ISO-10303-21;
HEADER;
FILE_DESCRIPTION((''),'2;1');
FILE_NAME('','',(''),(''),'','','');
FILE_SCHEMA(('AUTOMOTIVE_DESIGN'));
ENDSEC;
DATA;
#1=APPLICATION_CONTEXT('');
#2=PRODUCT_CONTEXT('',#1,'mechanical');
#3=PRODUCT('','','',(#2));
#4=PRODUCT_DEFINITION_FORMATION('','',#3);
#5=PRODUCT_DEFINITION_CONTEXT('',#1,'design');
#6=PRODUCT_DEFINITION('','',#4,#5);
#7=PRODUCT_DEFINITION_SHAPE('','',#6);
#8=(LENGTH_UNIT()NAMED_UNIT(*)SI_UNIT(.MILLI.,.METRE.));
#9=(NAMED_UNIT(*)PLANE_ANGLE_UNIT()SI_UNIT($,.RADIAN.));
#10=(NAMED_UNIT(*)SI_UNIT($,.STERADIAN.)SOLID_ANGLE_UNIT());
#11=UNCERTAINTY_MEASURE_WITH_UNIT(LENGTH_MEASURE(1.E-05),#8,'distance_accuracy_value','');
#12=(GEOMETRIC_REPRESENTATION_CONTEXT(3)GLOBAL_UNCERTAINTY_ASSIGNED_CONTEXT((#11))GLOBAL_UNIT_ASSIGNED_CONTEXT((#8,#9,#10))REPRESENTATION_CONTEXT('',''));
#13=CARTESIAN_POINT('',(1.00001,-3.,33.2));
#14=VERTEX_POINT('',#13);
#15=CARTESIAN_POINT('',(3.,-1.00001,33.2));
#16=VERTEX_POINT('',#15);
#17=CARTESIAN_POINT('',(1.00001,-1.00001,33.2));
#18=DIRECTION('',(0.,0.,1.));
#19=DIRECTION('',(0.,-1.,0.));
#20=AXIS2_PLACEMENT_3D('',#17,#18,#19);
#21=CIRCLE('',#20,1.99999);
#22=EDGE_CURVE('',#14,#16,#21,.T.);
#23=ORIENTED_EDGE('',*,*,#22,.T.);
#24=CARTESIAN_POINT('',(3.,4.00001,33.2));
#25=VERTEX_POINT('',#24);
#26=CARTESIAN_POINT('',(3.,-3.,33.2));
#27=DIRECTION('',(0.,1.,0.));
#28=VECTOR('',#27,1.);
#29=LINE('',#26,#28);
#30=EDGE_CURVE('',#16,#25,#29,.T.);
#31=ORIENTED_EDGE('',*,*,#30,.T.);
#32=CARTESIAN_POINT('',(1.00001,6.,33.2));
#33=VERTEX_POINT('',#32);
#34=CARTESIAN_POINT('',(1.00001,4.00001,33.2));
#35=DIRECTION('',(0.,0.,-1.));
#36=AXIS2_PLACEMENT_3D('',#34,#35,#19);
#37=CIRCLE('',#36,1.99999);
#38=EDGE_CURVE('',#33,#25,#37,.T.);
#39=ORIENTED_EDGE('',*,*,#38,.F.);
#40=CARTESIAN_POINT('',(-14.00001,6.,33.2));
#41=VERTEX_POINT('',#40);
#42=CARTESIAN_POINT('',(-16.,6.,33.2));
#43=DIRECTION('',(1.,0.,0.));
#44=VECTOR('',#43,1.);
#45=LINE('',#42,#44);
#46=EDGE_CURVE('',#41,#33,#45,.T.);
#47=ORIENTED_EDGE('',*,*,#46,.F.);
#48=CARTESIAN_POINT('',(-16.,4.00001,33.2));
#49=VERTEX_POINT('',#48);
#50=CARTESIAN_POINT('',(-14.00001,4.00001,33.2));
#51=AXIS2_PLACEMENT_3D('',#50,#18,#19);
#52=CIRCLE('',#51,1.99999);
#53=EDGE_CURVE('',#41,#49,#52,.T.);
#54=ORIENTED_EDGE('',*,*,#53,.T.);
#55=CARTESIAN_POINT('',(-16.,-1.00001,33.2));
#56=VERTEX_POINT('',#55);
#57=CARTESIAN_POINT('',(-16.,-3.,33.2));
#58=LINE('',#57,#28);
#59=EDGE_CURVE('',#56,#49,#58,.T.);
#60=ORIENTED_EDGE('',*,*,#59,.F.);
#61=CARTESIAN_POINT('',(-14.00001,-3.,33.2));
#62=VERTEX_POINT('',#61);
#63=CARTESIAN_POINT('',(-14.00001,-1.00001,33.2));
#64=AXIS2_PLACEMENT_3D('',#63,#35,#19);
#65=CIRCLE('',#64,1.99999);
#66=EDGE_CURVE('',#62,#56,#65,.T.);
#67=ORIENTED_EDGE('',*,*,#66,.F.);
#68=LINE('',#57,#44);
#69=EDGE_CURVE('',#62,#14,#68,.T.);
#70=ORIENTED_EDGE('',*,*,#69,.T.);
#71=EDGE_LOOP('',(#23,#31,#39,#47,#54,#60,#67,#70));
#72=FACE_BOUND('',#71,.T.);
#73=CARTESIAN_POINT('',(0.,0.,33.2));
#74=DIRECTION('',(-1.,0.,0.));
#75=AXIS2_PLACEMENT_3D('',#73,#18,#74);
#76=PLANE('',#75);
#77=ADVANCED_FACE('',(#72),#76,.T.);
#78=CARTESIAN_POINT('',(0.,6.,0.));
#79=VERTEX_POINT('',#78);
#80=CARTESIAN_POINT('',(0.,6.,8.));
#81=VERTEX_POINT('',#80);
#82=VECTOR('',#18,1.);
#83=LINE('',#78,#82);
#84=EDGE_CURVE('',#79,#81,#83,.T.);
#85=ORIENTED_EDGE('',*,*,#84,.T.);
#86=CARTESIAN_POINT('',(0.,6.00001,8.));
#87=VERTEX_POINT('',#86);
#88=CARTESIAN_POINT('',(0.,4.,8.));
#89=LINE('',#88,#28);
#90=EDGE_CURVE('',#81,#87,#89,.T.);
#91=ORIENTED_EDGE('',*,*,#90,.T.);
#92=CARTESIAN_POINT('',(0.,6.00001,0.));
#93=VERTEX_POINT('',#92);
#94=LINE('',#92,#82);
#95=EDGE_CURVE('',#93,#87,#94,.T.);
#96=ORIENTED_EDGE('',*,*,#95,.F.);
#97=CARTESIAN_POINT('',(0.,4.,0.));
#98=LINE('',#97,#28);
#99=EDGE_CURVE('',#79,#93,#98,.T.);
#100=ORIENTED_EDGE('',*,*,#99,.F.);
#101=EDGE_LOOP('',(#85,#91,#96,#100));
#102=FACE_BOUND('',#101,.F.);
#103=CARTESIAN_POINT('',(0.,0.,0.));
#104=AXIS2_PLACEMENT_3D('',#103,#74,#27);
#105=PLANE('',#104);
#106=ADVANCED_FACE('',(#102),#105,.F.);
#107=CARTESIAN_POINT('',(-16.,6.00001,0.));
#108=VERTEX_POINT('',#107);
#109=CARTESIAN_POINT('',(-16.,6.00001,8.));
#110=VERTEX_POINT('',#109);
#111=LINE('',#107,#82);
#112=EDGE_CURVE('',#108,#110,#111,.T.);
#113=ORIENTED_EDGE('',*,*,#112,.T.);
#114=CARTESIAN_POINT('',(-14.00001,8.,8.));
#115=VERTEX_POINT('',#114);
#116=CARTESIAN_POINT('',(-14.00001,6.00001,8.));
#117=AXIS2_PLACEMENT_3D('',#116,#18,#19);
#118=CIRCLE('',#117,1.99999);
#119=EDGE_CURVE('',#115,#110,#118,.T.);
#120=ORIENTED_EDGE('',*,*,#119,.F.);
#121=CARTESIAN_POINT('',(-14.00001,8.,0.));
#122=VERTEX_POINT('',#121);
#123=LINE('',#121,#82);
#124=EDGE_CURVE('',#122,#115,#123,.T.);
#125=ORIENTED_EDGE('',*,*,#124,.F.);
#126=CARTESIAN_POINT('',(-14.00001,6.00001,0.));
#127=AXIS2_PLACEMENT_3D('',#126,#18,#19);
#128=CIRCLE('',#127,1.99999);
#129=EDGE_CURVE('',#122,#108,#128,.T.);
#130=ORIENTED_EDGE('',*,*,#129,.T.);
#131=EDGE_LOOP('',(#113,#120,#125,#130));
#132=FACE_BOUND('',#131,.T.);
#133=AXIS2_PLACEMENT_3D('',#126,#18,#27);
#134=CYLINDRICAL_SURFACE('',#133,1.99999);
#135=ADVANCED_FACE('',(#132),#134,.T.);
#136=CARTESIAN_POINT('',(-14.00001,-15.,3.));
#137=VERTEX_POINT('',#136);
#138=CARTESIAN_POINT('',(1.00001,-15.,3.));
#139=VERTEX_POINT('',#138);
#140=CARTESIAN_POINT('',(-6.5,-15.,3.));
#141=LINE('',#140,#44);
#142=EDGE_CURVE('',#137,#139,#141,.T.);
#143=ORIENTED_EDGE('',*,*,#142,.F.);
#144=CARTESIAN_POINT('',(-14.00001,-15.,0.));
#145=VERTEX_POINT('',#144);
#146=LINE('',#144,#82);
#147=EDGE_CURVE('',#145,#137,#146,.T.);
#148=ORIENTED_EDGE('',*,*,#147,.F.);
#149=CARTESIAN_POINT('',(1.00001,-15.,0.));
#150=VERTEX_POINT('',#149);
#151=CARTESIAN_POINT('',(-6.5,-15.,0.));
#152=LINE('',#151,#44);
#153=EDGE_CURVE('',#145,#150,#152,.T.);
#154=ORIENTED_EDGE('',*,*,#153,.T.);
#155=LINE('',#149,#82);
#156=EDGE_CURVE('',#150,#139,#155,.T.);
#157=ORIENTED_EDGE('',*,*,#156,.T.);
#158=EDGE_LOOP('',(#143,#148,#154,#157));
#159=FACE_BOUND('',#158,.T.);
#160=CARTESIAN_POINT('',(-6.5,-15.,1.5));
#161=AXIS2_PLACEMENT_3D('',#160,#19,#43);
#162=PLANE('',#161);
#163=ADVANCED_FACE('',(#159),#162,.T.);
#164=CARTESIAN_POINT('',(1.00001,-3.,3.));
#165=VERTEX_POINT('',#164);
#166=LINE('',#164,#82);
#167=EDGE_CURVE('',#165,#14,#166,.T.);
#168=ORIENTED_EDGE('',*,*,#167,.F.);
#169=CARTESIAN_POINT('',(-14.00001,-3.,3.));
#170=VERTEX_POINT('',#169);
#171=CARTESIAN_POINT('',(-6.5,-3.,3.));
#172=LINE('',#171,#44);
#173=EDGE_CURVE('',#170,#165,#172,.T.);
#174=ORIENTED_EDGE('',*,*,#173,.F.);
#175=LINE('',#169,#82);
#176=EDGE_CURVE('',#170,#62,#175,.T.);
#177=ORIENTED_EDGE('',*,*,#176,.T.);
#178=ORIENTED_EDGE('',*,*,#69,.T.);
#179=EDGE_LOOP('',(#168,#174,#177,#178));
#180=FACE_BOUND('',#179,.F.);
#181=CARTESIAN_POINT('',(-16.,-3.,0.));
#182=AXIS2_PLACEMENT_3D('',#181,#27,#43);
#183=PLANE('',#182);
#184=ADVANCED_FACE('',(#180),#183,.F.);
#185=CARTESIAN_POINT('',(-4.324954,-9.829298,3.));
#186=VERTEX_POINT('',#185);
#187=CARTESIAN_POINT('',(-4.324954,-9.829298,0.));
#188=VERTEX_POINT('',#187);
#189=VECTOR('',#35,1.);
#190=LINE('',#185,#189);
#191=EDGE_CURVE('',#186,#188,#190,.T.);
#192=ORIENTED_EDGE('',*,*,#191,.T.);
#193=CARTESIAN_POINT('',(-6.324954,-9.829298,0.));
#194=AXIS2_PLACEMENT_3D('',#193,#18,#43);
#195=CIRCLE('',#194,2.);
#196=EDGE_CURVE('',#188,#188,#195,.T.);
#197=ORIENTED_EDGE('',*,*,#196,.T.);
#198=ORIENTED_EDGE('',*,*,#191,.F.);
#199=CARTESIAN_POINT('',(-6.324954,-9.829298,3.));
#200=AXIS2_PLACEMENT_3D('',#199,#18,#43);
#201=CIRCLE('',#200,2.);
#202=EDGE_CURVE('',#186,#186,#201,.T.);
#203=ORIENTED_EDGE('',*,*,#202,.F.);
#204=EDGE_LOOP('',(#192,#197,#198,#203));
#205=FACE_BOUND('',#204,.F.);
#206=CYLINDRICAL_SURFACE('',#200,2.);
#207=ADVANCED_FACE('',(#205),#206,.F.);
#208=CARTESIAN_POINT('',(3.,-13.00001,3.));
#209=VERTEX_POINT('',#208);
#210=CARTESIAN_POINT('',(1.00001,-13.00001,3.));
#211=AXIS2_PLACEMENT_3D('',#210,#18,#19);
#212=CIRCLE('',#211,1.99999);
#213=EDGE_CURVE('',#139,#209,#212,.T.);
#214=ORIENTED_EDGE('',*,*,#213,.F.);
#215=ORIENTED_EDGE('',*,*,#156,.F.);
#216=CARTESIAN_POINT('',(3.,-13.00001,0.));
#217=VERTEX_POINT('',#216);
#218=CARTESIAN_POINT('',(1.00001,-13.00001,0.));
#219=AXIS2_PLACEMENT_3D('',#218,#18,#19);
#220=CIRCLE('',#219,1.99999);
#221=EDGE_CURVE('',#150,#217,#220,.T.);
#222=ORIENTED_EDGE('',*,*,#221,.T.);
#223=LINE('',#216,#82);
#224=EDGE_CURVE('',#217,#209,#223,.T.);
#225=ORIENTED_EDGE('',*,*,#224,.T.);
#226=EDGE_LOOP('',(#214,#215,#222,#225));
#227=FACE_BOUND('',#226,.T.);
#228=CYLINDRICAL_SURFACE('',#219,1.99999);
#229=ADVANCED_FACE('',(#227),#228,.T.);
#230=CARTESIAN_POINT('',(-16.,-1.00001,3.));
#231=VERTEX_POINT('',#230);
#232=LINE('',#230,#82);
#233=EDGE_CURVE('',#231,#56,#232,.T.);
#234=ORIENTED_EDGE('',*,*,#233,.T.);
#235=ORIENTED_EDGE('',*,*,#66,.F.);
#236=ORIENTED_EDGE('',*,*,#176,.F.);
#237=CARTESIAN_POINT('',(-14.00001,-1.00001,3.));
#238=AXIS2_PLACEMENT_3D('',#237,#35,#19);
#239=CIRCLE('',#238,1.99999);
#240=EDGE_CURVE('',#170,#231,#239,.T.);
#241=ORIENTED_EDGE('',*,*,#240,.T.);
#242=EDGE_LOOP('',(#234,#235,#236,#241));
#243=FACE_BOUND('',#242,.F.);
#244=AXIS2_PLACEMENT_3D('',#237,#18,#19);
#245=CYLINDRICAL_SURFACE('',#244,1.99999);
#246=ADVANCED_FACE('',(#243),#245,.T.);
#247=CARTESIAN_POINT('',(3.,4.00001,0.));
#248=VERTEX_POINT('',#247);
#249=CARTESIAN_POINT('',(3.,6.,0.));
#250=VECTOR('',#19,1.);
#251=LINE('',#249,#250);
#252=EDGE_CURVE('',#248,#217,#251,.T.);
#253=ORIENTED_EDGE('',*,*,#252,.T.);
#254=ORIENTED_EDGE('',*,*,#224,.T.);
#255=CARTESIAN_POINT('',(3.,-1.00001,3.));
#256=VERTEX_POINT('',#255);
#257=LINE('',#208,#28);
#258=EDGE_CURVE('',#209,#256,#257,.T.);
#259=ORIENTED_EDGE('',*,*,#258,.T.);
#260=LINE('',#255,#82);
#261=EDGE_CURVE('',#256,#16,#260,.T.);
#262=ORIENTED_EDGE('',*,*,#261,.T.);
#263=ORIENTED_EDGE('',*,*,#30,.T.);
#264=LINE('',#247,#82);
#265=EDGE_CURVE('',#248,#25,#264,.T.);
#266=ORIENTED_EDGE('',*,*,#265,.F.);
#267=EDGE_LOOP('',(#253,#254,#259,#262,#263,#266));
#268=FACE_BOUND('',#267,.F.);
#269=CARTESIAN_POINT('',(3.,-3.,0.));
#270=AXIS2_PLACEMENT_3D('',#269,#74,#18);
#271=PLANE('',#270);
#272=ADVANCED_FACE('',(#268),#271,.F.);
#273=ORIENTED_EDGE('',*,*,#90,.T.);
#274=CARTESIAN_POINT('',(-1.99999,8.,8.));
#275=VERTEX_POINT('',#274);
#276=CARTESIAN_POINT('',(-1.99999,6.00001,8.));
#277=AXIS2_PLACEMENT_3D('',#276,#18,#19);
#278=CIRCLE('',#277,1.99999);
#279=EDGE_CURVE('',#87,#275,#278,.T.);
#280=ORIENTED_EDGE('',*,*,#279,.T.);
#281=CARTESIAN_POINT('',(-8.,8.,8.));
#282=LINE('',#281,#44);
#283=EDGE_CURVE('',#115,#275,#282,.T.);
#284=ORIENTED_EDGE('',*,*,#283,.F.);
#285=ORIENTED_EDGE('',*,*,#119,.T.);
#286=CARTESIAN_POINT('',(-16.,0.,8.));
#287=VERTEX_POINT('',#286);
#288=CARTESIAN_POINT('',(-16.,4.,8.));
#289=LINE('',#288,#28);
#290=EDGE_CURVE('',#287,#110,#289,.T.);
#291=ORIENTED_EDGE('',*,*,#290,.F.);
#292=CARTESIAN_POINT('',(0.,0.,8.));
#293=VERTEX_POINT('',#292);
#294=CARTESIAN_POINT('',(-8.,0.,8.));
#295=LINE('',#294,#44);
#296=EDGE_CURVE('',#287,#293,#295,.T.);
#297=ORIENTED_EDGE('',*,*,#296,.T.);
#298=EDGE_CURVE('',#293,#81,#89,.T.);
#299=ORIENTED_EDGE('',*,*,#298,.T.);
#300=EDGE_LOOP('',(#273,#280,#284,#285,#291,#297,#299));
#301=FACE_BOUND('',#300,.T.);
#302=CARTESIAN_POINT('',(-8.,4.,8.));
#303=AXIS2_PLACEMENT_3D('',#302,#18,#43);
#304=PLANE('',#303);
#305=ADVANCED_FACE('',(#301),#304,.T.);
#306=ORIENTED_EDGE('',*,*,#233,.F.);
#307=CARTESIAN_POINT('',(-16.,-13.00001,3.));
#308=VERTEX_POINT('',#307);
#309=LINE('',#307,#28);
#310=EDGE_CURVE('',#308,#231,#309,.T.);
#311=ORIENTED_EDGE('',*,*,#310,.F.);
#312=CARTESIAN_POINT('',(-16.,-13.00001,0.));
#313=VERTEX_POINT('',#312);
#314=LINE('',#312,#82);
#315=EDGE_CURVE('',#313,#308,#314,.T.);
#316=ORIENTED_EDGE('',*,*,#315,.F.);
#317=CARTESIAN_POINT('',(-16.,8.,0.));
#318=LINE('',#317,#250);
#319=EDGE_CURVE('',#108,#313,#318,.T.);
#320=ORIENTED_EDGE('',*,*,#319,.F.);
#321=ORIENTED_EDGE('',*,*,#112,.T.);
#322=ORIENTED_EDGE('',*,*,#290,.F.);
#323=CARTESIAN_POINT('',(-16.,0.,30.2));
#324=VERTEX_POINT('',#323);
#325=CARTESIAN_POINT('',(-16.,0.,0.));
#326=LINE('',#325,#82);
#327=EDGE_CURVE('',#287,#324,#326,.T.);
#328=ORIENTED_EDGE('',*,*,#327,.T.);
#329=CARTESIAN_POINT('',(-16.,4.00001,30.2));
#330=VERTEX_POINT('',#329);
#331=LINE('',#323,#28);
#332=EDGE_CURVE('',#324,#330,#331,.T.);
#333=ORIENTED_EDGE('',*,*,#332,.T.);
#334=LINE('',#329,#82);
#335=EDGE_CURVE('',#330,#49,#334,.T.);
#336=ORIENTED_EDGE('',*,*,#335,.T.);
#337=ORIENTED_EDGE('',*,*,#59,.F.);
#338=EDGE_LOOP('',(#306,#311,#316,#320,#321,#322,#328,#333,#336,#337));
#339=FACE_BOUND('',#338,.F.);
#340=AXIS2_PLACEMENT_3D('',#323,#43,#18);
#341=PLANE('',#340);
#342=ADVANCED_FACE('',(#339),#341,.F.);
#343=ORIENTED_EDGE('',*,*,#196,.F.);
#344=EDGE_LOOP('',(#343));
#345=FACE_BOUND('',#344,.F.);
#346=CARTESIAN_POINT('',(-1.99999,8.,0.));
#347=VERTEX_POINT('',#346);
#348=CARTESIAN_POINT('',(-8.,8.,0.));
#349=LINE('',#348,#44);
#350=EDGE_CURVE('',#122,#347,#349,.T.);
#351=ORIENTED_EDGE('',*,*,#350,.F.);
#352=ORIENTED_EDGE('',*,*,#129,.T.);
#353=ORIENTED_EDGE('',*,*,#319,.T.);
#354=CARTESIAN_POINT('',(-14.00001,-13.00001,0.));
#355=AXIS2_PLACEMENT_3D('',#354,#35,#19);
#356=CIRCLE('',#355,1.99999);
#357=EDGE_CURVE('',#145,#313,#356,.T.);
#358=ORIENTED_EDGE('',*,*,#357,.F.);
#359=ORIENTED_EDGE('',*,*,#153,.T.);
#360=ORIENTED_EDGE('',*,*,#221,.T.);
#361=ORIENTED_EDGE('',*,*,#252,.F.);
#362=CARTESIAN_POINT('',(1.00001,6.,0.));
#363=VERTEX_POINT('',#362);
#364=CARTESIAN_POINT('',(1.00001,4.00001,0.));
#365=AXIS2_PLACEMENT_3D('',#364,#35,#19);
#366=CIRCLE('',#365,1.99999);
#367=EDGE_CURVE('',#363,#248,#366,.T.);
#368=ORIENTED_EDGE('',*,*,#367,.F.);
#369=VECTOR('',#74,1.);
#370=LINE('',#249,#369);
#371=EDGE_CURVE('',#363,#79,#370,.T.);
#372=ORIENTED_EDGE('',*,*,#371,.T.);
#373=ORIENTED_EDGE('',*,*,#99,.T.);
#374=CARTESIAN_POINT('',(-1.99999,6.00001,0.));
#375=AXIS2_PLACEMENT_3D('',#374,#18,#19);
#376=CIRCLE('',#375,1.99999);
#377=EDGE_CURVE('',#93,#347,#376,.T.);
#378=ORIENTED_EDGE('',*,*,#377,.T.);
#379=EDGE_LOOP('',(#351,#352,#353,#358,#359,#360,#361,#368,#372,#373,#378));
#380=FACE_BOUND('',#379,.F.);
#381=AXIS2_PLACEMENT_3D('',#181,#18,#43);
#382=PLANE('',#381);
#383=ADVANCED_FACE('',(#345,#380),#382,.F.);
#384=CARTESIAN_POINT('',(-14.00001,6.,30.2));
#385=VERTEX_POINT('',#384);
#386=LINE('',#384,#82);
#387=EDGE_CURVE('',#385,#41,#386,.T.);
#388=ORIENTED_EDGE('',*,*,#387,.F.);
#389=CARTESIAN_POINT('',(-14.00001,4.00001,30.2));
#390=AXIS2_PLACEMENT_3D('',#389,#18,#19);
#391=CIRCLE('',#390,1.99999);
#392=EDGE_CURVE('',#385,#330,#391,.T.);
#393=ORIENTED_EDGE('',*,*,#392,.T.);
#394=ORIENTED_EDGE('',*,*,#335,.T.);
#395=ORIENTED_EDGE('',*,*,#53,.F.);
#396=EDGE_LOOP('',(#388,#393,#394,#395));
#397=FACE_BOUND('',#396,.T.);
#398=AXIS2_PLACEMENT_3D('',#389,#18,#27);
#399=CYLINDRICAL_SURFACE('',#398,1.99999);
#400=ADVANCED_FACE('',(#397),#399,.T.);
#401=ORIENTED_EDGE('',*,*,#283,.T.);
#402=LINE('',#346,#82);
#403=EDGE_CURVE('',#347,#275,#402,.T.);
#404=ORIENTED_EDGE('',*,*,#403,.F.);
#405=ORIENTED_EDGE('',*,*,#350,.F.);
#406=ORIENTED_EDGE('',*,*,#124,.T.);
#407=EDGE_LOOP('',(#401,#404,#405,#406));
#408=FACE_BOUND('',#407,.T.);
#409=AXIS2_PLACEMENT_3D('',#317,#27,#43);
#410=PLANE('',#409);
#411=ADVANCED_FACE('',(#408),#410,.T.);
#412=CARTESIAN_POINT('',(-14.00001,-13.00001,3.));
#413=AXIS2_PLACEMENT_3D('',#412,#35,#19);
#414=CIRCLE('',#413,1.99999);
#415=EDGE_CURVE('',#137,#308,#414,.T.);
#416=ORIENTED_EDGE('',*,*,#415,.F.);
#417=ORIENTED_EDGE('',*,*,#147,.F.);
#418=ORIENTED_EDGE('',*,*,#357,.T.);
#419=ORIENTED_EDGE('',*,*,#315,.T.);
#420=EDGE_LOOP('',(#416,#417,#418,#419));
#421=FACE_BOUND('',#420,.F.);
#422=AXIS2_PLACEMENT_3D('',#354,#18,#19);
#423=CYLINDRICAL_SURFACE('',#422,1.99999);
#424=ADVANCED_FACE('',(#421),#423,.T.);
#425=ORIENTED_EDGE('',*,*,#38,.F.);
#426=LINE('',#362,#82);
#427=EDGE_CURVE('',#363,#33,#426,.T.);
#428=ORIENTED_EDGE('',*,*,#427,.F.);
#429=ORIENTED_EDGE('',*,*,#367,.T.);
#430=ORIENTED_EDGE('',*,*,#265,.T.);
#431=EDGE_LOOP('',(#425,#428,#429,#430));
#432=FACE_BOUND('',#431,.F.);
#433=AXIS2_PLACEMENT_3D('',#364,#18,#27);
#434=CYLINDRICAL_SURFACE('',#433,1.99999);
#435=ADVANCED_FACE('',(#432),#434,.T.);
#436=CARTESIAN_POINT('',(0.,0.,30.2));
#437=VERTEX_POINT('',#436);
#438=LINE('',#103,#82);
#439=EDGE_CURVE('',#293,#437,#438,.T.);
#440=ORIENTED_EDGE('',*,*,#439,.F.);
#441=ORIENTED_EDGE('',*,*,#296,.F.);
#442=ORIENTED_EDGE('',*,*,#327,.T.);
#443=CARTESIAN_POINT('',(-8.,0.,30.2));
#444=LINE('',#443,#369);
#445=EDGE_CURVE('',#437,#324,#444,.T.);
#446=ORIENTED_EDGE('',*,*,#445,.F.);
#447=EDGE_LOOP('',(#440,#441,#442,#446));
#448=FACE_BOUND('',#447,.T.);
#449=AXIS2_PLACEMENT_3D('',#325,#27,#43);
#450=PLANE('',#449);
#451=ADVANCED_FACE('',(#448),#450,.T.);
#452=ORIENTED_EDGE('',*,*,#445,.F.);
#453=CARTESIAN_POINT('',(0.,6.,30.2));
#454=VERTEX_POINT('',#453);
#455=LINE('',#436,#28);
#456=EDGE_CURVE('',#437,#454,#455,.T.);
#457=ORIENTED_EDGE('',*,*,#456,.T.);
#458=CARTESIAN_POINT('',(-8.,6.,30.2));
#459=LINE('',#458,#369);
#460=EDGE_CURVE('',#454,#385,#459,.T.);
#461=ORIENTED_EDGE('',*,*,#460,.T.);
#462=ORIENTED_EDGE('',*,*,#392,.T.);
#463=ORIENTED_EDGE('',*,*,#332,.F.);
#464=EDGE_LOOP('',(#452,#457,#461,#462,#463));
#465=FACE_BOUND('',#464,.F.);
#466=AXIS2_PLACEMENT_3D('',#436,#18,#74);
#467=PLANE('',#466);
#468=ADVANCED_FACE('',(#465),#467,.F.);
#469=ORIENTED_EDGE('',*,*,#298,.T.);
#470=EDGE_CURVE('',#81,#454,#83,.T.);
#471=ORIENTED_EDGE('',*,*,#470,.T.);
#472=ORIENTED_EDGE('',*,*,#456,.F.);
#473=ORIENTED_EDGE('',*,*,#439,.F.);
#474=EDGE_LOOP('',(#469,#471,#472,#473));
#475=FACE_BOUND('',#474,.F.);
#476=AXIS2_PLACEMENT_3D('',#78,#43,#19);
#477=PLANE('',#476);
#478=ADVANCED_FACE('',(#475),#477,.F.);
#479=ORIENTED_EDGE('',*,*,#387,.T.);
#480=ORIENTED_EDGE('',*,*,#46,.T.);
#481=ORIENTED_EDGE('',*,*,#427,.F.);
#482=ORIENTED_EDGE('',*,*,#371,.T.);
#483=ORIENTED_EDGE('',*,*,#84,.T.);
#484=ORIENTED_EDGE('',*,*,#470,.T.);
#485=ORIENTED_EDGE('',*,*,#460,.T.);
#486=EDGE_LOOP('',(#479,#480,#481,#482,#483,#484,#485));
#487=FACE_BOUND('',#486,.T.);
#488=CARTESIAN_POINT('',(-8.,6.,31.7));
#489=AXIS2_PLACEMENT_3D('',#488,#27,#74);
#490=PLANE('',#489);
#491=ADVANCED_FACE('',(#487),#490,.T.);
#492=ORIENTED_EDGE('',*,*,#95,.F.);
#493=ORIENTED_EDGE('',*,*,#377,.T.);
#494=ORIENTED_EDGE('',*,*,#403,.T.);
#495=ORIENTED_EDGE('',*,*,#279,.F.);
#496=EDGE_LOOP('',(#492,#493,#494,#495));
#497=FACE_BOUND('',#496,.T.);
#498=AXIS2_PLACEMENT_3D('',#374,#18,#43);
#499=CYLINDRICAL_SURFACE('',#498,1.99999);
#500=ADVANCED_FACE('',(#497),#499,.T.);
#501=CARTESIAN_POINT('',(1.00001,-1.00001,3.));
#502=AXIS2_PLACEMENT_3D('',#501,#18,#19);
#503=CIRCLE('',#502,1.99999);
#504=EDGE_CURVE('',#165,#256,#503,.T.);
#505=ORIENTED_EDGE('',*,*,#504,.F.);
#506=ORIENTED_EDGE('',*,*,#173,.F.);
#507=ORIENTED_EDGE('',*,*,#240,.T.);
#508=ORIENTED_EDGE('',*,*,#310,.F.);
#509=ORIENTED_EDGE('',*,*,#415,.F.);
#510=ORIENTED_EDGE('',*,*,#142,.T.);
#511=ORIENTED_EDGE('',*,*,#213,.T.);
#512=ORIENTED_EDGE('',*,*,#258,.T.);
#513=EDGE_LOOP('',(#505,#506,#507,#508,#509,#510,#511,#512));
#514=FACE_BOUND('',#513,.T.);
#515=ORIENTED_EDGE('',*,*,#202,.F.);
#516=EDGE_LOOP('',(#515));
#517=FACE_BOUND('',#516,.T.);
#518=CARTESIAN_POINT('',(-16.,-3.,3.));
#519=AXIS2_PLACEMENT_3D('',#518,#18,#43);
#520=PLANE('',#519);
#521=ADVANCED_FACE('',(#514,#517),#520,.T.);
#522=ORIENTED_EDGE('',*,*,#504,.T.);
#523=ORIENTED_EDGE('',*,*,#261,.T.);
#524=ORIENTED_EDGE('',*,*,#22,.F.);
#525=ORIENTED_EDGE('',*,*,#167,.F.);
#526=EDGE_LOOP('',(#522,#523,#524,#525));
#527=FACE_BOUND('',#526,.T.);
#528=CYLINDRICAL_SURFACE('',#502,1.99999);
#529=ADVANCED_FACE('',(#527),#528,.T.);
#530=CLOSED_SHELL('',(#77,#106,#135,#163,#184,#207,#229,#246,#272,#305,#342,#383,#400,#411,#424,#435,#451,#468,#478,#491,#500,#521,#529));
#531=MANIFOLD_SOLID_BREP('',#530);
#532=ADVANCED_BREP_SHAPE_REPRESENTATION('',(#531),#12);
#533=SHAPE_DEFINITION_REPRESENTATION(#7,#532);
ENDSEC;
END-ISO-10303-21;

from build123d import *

# Parameters (mm, degrees)
F0_W     = 16
F0_H     = 8
F1_DEPTH = 8
F2_W     = 16
F2_H     = 3
F3_DEPTH = 33.2
F4_W     = 19
F4_H     = 3
F5_DEPTH = 12
F6_R     = 2
F7_DEPTH = 3
F8_W     = 16
F8_H     = 3
F9_DEPTH = 6
F10_R    = 1.99999


# Not quite as in the source:
# - a fillet or chamfer is up to 0.001 mm smaller than in the source, because OpenCascade refuses the exact size


with BuildPart() as f1:
    # F0 (on Top) → F1 (new body)
    with BuildSketch(Plane.XY):
        with Locations((-8, 4)):
            Rectangle(F0_W, F0_H)
    extrude(amount=F1_DEPTH)

    # F2 (on Top) → F3 (join)
    with BuildSketch(Plane.XY):
        with Locations((-8, -1.5)):
            Rectangle(F2_W, F2_H)
        Polygon((0, 6), (0, 0), (0, -3), (3, -3), (3, 6), align=None)
    extrude(amount=F3_DEPTH)

    # F4 (on face) → F5 (join)
    with BuildSketch(Plane.XZ.offset(3)):
        with Locations((-6.5, 1.5)):
            Rectangle(F4_W, F4_H)
    extrude(amount=F5_DEPTH)

    # F6 (on face) → F7 (cut, through all)
    with BuildSketch(Plane.XY.offset(3)):
        with Locations((-6.3249543309, -9.8292976618)):
            Circle(F6_R)
    extrude(amount=-F7_DEPTH, mode=Mode.SUBTRACT)

    # F8 (on face) → F9 (join)
    with BuildSketch(Plane(origin=(0, 0, 0), x_dir=(-1, 0, 0), z_dir=(0, 1, 0))):
        with Locations((8, 31.7)):
            Rectangle(F8_W, F8_H)
    extrude(amount=F9_DEPTH)

    # F10 (radius 2 in the source; OpenCascade refuses exactly that, so slightly less here)
    f10_edges = [f1.edges().sort_by_distance(p)[0] for p in [
        (-16, 6, 31.7),
        (-16, 8, 4),
        (0, 8, 4),
        (3, 6, 16.6),
        (3, -15, 1.5),
        (3, -3, 18.1),
        (-16, -3, 18.1),
        (-16, -15, 1.5),
    ]]
    fillet(f10_edges, radius=F10_R)


solid = f1.part
